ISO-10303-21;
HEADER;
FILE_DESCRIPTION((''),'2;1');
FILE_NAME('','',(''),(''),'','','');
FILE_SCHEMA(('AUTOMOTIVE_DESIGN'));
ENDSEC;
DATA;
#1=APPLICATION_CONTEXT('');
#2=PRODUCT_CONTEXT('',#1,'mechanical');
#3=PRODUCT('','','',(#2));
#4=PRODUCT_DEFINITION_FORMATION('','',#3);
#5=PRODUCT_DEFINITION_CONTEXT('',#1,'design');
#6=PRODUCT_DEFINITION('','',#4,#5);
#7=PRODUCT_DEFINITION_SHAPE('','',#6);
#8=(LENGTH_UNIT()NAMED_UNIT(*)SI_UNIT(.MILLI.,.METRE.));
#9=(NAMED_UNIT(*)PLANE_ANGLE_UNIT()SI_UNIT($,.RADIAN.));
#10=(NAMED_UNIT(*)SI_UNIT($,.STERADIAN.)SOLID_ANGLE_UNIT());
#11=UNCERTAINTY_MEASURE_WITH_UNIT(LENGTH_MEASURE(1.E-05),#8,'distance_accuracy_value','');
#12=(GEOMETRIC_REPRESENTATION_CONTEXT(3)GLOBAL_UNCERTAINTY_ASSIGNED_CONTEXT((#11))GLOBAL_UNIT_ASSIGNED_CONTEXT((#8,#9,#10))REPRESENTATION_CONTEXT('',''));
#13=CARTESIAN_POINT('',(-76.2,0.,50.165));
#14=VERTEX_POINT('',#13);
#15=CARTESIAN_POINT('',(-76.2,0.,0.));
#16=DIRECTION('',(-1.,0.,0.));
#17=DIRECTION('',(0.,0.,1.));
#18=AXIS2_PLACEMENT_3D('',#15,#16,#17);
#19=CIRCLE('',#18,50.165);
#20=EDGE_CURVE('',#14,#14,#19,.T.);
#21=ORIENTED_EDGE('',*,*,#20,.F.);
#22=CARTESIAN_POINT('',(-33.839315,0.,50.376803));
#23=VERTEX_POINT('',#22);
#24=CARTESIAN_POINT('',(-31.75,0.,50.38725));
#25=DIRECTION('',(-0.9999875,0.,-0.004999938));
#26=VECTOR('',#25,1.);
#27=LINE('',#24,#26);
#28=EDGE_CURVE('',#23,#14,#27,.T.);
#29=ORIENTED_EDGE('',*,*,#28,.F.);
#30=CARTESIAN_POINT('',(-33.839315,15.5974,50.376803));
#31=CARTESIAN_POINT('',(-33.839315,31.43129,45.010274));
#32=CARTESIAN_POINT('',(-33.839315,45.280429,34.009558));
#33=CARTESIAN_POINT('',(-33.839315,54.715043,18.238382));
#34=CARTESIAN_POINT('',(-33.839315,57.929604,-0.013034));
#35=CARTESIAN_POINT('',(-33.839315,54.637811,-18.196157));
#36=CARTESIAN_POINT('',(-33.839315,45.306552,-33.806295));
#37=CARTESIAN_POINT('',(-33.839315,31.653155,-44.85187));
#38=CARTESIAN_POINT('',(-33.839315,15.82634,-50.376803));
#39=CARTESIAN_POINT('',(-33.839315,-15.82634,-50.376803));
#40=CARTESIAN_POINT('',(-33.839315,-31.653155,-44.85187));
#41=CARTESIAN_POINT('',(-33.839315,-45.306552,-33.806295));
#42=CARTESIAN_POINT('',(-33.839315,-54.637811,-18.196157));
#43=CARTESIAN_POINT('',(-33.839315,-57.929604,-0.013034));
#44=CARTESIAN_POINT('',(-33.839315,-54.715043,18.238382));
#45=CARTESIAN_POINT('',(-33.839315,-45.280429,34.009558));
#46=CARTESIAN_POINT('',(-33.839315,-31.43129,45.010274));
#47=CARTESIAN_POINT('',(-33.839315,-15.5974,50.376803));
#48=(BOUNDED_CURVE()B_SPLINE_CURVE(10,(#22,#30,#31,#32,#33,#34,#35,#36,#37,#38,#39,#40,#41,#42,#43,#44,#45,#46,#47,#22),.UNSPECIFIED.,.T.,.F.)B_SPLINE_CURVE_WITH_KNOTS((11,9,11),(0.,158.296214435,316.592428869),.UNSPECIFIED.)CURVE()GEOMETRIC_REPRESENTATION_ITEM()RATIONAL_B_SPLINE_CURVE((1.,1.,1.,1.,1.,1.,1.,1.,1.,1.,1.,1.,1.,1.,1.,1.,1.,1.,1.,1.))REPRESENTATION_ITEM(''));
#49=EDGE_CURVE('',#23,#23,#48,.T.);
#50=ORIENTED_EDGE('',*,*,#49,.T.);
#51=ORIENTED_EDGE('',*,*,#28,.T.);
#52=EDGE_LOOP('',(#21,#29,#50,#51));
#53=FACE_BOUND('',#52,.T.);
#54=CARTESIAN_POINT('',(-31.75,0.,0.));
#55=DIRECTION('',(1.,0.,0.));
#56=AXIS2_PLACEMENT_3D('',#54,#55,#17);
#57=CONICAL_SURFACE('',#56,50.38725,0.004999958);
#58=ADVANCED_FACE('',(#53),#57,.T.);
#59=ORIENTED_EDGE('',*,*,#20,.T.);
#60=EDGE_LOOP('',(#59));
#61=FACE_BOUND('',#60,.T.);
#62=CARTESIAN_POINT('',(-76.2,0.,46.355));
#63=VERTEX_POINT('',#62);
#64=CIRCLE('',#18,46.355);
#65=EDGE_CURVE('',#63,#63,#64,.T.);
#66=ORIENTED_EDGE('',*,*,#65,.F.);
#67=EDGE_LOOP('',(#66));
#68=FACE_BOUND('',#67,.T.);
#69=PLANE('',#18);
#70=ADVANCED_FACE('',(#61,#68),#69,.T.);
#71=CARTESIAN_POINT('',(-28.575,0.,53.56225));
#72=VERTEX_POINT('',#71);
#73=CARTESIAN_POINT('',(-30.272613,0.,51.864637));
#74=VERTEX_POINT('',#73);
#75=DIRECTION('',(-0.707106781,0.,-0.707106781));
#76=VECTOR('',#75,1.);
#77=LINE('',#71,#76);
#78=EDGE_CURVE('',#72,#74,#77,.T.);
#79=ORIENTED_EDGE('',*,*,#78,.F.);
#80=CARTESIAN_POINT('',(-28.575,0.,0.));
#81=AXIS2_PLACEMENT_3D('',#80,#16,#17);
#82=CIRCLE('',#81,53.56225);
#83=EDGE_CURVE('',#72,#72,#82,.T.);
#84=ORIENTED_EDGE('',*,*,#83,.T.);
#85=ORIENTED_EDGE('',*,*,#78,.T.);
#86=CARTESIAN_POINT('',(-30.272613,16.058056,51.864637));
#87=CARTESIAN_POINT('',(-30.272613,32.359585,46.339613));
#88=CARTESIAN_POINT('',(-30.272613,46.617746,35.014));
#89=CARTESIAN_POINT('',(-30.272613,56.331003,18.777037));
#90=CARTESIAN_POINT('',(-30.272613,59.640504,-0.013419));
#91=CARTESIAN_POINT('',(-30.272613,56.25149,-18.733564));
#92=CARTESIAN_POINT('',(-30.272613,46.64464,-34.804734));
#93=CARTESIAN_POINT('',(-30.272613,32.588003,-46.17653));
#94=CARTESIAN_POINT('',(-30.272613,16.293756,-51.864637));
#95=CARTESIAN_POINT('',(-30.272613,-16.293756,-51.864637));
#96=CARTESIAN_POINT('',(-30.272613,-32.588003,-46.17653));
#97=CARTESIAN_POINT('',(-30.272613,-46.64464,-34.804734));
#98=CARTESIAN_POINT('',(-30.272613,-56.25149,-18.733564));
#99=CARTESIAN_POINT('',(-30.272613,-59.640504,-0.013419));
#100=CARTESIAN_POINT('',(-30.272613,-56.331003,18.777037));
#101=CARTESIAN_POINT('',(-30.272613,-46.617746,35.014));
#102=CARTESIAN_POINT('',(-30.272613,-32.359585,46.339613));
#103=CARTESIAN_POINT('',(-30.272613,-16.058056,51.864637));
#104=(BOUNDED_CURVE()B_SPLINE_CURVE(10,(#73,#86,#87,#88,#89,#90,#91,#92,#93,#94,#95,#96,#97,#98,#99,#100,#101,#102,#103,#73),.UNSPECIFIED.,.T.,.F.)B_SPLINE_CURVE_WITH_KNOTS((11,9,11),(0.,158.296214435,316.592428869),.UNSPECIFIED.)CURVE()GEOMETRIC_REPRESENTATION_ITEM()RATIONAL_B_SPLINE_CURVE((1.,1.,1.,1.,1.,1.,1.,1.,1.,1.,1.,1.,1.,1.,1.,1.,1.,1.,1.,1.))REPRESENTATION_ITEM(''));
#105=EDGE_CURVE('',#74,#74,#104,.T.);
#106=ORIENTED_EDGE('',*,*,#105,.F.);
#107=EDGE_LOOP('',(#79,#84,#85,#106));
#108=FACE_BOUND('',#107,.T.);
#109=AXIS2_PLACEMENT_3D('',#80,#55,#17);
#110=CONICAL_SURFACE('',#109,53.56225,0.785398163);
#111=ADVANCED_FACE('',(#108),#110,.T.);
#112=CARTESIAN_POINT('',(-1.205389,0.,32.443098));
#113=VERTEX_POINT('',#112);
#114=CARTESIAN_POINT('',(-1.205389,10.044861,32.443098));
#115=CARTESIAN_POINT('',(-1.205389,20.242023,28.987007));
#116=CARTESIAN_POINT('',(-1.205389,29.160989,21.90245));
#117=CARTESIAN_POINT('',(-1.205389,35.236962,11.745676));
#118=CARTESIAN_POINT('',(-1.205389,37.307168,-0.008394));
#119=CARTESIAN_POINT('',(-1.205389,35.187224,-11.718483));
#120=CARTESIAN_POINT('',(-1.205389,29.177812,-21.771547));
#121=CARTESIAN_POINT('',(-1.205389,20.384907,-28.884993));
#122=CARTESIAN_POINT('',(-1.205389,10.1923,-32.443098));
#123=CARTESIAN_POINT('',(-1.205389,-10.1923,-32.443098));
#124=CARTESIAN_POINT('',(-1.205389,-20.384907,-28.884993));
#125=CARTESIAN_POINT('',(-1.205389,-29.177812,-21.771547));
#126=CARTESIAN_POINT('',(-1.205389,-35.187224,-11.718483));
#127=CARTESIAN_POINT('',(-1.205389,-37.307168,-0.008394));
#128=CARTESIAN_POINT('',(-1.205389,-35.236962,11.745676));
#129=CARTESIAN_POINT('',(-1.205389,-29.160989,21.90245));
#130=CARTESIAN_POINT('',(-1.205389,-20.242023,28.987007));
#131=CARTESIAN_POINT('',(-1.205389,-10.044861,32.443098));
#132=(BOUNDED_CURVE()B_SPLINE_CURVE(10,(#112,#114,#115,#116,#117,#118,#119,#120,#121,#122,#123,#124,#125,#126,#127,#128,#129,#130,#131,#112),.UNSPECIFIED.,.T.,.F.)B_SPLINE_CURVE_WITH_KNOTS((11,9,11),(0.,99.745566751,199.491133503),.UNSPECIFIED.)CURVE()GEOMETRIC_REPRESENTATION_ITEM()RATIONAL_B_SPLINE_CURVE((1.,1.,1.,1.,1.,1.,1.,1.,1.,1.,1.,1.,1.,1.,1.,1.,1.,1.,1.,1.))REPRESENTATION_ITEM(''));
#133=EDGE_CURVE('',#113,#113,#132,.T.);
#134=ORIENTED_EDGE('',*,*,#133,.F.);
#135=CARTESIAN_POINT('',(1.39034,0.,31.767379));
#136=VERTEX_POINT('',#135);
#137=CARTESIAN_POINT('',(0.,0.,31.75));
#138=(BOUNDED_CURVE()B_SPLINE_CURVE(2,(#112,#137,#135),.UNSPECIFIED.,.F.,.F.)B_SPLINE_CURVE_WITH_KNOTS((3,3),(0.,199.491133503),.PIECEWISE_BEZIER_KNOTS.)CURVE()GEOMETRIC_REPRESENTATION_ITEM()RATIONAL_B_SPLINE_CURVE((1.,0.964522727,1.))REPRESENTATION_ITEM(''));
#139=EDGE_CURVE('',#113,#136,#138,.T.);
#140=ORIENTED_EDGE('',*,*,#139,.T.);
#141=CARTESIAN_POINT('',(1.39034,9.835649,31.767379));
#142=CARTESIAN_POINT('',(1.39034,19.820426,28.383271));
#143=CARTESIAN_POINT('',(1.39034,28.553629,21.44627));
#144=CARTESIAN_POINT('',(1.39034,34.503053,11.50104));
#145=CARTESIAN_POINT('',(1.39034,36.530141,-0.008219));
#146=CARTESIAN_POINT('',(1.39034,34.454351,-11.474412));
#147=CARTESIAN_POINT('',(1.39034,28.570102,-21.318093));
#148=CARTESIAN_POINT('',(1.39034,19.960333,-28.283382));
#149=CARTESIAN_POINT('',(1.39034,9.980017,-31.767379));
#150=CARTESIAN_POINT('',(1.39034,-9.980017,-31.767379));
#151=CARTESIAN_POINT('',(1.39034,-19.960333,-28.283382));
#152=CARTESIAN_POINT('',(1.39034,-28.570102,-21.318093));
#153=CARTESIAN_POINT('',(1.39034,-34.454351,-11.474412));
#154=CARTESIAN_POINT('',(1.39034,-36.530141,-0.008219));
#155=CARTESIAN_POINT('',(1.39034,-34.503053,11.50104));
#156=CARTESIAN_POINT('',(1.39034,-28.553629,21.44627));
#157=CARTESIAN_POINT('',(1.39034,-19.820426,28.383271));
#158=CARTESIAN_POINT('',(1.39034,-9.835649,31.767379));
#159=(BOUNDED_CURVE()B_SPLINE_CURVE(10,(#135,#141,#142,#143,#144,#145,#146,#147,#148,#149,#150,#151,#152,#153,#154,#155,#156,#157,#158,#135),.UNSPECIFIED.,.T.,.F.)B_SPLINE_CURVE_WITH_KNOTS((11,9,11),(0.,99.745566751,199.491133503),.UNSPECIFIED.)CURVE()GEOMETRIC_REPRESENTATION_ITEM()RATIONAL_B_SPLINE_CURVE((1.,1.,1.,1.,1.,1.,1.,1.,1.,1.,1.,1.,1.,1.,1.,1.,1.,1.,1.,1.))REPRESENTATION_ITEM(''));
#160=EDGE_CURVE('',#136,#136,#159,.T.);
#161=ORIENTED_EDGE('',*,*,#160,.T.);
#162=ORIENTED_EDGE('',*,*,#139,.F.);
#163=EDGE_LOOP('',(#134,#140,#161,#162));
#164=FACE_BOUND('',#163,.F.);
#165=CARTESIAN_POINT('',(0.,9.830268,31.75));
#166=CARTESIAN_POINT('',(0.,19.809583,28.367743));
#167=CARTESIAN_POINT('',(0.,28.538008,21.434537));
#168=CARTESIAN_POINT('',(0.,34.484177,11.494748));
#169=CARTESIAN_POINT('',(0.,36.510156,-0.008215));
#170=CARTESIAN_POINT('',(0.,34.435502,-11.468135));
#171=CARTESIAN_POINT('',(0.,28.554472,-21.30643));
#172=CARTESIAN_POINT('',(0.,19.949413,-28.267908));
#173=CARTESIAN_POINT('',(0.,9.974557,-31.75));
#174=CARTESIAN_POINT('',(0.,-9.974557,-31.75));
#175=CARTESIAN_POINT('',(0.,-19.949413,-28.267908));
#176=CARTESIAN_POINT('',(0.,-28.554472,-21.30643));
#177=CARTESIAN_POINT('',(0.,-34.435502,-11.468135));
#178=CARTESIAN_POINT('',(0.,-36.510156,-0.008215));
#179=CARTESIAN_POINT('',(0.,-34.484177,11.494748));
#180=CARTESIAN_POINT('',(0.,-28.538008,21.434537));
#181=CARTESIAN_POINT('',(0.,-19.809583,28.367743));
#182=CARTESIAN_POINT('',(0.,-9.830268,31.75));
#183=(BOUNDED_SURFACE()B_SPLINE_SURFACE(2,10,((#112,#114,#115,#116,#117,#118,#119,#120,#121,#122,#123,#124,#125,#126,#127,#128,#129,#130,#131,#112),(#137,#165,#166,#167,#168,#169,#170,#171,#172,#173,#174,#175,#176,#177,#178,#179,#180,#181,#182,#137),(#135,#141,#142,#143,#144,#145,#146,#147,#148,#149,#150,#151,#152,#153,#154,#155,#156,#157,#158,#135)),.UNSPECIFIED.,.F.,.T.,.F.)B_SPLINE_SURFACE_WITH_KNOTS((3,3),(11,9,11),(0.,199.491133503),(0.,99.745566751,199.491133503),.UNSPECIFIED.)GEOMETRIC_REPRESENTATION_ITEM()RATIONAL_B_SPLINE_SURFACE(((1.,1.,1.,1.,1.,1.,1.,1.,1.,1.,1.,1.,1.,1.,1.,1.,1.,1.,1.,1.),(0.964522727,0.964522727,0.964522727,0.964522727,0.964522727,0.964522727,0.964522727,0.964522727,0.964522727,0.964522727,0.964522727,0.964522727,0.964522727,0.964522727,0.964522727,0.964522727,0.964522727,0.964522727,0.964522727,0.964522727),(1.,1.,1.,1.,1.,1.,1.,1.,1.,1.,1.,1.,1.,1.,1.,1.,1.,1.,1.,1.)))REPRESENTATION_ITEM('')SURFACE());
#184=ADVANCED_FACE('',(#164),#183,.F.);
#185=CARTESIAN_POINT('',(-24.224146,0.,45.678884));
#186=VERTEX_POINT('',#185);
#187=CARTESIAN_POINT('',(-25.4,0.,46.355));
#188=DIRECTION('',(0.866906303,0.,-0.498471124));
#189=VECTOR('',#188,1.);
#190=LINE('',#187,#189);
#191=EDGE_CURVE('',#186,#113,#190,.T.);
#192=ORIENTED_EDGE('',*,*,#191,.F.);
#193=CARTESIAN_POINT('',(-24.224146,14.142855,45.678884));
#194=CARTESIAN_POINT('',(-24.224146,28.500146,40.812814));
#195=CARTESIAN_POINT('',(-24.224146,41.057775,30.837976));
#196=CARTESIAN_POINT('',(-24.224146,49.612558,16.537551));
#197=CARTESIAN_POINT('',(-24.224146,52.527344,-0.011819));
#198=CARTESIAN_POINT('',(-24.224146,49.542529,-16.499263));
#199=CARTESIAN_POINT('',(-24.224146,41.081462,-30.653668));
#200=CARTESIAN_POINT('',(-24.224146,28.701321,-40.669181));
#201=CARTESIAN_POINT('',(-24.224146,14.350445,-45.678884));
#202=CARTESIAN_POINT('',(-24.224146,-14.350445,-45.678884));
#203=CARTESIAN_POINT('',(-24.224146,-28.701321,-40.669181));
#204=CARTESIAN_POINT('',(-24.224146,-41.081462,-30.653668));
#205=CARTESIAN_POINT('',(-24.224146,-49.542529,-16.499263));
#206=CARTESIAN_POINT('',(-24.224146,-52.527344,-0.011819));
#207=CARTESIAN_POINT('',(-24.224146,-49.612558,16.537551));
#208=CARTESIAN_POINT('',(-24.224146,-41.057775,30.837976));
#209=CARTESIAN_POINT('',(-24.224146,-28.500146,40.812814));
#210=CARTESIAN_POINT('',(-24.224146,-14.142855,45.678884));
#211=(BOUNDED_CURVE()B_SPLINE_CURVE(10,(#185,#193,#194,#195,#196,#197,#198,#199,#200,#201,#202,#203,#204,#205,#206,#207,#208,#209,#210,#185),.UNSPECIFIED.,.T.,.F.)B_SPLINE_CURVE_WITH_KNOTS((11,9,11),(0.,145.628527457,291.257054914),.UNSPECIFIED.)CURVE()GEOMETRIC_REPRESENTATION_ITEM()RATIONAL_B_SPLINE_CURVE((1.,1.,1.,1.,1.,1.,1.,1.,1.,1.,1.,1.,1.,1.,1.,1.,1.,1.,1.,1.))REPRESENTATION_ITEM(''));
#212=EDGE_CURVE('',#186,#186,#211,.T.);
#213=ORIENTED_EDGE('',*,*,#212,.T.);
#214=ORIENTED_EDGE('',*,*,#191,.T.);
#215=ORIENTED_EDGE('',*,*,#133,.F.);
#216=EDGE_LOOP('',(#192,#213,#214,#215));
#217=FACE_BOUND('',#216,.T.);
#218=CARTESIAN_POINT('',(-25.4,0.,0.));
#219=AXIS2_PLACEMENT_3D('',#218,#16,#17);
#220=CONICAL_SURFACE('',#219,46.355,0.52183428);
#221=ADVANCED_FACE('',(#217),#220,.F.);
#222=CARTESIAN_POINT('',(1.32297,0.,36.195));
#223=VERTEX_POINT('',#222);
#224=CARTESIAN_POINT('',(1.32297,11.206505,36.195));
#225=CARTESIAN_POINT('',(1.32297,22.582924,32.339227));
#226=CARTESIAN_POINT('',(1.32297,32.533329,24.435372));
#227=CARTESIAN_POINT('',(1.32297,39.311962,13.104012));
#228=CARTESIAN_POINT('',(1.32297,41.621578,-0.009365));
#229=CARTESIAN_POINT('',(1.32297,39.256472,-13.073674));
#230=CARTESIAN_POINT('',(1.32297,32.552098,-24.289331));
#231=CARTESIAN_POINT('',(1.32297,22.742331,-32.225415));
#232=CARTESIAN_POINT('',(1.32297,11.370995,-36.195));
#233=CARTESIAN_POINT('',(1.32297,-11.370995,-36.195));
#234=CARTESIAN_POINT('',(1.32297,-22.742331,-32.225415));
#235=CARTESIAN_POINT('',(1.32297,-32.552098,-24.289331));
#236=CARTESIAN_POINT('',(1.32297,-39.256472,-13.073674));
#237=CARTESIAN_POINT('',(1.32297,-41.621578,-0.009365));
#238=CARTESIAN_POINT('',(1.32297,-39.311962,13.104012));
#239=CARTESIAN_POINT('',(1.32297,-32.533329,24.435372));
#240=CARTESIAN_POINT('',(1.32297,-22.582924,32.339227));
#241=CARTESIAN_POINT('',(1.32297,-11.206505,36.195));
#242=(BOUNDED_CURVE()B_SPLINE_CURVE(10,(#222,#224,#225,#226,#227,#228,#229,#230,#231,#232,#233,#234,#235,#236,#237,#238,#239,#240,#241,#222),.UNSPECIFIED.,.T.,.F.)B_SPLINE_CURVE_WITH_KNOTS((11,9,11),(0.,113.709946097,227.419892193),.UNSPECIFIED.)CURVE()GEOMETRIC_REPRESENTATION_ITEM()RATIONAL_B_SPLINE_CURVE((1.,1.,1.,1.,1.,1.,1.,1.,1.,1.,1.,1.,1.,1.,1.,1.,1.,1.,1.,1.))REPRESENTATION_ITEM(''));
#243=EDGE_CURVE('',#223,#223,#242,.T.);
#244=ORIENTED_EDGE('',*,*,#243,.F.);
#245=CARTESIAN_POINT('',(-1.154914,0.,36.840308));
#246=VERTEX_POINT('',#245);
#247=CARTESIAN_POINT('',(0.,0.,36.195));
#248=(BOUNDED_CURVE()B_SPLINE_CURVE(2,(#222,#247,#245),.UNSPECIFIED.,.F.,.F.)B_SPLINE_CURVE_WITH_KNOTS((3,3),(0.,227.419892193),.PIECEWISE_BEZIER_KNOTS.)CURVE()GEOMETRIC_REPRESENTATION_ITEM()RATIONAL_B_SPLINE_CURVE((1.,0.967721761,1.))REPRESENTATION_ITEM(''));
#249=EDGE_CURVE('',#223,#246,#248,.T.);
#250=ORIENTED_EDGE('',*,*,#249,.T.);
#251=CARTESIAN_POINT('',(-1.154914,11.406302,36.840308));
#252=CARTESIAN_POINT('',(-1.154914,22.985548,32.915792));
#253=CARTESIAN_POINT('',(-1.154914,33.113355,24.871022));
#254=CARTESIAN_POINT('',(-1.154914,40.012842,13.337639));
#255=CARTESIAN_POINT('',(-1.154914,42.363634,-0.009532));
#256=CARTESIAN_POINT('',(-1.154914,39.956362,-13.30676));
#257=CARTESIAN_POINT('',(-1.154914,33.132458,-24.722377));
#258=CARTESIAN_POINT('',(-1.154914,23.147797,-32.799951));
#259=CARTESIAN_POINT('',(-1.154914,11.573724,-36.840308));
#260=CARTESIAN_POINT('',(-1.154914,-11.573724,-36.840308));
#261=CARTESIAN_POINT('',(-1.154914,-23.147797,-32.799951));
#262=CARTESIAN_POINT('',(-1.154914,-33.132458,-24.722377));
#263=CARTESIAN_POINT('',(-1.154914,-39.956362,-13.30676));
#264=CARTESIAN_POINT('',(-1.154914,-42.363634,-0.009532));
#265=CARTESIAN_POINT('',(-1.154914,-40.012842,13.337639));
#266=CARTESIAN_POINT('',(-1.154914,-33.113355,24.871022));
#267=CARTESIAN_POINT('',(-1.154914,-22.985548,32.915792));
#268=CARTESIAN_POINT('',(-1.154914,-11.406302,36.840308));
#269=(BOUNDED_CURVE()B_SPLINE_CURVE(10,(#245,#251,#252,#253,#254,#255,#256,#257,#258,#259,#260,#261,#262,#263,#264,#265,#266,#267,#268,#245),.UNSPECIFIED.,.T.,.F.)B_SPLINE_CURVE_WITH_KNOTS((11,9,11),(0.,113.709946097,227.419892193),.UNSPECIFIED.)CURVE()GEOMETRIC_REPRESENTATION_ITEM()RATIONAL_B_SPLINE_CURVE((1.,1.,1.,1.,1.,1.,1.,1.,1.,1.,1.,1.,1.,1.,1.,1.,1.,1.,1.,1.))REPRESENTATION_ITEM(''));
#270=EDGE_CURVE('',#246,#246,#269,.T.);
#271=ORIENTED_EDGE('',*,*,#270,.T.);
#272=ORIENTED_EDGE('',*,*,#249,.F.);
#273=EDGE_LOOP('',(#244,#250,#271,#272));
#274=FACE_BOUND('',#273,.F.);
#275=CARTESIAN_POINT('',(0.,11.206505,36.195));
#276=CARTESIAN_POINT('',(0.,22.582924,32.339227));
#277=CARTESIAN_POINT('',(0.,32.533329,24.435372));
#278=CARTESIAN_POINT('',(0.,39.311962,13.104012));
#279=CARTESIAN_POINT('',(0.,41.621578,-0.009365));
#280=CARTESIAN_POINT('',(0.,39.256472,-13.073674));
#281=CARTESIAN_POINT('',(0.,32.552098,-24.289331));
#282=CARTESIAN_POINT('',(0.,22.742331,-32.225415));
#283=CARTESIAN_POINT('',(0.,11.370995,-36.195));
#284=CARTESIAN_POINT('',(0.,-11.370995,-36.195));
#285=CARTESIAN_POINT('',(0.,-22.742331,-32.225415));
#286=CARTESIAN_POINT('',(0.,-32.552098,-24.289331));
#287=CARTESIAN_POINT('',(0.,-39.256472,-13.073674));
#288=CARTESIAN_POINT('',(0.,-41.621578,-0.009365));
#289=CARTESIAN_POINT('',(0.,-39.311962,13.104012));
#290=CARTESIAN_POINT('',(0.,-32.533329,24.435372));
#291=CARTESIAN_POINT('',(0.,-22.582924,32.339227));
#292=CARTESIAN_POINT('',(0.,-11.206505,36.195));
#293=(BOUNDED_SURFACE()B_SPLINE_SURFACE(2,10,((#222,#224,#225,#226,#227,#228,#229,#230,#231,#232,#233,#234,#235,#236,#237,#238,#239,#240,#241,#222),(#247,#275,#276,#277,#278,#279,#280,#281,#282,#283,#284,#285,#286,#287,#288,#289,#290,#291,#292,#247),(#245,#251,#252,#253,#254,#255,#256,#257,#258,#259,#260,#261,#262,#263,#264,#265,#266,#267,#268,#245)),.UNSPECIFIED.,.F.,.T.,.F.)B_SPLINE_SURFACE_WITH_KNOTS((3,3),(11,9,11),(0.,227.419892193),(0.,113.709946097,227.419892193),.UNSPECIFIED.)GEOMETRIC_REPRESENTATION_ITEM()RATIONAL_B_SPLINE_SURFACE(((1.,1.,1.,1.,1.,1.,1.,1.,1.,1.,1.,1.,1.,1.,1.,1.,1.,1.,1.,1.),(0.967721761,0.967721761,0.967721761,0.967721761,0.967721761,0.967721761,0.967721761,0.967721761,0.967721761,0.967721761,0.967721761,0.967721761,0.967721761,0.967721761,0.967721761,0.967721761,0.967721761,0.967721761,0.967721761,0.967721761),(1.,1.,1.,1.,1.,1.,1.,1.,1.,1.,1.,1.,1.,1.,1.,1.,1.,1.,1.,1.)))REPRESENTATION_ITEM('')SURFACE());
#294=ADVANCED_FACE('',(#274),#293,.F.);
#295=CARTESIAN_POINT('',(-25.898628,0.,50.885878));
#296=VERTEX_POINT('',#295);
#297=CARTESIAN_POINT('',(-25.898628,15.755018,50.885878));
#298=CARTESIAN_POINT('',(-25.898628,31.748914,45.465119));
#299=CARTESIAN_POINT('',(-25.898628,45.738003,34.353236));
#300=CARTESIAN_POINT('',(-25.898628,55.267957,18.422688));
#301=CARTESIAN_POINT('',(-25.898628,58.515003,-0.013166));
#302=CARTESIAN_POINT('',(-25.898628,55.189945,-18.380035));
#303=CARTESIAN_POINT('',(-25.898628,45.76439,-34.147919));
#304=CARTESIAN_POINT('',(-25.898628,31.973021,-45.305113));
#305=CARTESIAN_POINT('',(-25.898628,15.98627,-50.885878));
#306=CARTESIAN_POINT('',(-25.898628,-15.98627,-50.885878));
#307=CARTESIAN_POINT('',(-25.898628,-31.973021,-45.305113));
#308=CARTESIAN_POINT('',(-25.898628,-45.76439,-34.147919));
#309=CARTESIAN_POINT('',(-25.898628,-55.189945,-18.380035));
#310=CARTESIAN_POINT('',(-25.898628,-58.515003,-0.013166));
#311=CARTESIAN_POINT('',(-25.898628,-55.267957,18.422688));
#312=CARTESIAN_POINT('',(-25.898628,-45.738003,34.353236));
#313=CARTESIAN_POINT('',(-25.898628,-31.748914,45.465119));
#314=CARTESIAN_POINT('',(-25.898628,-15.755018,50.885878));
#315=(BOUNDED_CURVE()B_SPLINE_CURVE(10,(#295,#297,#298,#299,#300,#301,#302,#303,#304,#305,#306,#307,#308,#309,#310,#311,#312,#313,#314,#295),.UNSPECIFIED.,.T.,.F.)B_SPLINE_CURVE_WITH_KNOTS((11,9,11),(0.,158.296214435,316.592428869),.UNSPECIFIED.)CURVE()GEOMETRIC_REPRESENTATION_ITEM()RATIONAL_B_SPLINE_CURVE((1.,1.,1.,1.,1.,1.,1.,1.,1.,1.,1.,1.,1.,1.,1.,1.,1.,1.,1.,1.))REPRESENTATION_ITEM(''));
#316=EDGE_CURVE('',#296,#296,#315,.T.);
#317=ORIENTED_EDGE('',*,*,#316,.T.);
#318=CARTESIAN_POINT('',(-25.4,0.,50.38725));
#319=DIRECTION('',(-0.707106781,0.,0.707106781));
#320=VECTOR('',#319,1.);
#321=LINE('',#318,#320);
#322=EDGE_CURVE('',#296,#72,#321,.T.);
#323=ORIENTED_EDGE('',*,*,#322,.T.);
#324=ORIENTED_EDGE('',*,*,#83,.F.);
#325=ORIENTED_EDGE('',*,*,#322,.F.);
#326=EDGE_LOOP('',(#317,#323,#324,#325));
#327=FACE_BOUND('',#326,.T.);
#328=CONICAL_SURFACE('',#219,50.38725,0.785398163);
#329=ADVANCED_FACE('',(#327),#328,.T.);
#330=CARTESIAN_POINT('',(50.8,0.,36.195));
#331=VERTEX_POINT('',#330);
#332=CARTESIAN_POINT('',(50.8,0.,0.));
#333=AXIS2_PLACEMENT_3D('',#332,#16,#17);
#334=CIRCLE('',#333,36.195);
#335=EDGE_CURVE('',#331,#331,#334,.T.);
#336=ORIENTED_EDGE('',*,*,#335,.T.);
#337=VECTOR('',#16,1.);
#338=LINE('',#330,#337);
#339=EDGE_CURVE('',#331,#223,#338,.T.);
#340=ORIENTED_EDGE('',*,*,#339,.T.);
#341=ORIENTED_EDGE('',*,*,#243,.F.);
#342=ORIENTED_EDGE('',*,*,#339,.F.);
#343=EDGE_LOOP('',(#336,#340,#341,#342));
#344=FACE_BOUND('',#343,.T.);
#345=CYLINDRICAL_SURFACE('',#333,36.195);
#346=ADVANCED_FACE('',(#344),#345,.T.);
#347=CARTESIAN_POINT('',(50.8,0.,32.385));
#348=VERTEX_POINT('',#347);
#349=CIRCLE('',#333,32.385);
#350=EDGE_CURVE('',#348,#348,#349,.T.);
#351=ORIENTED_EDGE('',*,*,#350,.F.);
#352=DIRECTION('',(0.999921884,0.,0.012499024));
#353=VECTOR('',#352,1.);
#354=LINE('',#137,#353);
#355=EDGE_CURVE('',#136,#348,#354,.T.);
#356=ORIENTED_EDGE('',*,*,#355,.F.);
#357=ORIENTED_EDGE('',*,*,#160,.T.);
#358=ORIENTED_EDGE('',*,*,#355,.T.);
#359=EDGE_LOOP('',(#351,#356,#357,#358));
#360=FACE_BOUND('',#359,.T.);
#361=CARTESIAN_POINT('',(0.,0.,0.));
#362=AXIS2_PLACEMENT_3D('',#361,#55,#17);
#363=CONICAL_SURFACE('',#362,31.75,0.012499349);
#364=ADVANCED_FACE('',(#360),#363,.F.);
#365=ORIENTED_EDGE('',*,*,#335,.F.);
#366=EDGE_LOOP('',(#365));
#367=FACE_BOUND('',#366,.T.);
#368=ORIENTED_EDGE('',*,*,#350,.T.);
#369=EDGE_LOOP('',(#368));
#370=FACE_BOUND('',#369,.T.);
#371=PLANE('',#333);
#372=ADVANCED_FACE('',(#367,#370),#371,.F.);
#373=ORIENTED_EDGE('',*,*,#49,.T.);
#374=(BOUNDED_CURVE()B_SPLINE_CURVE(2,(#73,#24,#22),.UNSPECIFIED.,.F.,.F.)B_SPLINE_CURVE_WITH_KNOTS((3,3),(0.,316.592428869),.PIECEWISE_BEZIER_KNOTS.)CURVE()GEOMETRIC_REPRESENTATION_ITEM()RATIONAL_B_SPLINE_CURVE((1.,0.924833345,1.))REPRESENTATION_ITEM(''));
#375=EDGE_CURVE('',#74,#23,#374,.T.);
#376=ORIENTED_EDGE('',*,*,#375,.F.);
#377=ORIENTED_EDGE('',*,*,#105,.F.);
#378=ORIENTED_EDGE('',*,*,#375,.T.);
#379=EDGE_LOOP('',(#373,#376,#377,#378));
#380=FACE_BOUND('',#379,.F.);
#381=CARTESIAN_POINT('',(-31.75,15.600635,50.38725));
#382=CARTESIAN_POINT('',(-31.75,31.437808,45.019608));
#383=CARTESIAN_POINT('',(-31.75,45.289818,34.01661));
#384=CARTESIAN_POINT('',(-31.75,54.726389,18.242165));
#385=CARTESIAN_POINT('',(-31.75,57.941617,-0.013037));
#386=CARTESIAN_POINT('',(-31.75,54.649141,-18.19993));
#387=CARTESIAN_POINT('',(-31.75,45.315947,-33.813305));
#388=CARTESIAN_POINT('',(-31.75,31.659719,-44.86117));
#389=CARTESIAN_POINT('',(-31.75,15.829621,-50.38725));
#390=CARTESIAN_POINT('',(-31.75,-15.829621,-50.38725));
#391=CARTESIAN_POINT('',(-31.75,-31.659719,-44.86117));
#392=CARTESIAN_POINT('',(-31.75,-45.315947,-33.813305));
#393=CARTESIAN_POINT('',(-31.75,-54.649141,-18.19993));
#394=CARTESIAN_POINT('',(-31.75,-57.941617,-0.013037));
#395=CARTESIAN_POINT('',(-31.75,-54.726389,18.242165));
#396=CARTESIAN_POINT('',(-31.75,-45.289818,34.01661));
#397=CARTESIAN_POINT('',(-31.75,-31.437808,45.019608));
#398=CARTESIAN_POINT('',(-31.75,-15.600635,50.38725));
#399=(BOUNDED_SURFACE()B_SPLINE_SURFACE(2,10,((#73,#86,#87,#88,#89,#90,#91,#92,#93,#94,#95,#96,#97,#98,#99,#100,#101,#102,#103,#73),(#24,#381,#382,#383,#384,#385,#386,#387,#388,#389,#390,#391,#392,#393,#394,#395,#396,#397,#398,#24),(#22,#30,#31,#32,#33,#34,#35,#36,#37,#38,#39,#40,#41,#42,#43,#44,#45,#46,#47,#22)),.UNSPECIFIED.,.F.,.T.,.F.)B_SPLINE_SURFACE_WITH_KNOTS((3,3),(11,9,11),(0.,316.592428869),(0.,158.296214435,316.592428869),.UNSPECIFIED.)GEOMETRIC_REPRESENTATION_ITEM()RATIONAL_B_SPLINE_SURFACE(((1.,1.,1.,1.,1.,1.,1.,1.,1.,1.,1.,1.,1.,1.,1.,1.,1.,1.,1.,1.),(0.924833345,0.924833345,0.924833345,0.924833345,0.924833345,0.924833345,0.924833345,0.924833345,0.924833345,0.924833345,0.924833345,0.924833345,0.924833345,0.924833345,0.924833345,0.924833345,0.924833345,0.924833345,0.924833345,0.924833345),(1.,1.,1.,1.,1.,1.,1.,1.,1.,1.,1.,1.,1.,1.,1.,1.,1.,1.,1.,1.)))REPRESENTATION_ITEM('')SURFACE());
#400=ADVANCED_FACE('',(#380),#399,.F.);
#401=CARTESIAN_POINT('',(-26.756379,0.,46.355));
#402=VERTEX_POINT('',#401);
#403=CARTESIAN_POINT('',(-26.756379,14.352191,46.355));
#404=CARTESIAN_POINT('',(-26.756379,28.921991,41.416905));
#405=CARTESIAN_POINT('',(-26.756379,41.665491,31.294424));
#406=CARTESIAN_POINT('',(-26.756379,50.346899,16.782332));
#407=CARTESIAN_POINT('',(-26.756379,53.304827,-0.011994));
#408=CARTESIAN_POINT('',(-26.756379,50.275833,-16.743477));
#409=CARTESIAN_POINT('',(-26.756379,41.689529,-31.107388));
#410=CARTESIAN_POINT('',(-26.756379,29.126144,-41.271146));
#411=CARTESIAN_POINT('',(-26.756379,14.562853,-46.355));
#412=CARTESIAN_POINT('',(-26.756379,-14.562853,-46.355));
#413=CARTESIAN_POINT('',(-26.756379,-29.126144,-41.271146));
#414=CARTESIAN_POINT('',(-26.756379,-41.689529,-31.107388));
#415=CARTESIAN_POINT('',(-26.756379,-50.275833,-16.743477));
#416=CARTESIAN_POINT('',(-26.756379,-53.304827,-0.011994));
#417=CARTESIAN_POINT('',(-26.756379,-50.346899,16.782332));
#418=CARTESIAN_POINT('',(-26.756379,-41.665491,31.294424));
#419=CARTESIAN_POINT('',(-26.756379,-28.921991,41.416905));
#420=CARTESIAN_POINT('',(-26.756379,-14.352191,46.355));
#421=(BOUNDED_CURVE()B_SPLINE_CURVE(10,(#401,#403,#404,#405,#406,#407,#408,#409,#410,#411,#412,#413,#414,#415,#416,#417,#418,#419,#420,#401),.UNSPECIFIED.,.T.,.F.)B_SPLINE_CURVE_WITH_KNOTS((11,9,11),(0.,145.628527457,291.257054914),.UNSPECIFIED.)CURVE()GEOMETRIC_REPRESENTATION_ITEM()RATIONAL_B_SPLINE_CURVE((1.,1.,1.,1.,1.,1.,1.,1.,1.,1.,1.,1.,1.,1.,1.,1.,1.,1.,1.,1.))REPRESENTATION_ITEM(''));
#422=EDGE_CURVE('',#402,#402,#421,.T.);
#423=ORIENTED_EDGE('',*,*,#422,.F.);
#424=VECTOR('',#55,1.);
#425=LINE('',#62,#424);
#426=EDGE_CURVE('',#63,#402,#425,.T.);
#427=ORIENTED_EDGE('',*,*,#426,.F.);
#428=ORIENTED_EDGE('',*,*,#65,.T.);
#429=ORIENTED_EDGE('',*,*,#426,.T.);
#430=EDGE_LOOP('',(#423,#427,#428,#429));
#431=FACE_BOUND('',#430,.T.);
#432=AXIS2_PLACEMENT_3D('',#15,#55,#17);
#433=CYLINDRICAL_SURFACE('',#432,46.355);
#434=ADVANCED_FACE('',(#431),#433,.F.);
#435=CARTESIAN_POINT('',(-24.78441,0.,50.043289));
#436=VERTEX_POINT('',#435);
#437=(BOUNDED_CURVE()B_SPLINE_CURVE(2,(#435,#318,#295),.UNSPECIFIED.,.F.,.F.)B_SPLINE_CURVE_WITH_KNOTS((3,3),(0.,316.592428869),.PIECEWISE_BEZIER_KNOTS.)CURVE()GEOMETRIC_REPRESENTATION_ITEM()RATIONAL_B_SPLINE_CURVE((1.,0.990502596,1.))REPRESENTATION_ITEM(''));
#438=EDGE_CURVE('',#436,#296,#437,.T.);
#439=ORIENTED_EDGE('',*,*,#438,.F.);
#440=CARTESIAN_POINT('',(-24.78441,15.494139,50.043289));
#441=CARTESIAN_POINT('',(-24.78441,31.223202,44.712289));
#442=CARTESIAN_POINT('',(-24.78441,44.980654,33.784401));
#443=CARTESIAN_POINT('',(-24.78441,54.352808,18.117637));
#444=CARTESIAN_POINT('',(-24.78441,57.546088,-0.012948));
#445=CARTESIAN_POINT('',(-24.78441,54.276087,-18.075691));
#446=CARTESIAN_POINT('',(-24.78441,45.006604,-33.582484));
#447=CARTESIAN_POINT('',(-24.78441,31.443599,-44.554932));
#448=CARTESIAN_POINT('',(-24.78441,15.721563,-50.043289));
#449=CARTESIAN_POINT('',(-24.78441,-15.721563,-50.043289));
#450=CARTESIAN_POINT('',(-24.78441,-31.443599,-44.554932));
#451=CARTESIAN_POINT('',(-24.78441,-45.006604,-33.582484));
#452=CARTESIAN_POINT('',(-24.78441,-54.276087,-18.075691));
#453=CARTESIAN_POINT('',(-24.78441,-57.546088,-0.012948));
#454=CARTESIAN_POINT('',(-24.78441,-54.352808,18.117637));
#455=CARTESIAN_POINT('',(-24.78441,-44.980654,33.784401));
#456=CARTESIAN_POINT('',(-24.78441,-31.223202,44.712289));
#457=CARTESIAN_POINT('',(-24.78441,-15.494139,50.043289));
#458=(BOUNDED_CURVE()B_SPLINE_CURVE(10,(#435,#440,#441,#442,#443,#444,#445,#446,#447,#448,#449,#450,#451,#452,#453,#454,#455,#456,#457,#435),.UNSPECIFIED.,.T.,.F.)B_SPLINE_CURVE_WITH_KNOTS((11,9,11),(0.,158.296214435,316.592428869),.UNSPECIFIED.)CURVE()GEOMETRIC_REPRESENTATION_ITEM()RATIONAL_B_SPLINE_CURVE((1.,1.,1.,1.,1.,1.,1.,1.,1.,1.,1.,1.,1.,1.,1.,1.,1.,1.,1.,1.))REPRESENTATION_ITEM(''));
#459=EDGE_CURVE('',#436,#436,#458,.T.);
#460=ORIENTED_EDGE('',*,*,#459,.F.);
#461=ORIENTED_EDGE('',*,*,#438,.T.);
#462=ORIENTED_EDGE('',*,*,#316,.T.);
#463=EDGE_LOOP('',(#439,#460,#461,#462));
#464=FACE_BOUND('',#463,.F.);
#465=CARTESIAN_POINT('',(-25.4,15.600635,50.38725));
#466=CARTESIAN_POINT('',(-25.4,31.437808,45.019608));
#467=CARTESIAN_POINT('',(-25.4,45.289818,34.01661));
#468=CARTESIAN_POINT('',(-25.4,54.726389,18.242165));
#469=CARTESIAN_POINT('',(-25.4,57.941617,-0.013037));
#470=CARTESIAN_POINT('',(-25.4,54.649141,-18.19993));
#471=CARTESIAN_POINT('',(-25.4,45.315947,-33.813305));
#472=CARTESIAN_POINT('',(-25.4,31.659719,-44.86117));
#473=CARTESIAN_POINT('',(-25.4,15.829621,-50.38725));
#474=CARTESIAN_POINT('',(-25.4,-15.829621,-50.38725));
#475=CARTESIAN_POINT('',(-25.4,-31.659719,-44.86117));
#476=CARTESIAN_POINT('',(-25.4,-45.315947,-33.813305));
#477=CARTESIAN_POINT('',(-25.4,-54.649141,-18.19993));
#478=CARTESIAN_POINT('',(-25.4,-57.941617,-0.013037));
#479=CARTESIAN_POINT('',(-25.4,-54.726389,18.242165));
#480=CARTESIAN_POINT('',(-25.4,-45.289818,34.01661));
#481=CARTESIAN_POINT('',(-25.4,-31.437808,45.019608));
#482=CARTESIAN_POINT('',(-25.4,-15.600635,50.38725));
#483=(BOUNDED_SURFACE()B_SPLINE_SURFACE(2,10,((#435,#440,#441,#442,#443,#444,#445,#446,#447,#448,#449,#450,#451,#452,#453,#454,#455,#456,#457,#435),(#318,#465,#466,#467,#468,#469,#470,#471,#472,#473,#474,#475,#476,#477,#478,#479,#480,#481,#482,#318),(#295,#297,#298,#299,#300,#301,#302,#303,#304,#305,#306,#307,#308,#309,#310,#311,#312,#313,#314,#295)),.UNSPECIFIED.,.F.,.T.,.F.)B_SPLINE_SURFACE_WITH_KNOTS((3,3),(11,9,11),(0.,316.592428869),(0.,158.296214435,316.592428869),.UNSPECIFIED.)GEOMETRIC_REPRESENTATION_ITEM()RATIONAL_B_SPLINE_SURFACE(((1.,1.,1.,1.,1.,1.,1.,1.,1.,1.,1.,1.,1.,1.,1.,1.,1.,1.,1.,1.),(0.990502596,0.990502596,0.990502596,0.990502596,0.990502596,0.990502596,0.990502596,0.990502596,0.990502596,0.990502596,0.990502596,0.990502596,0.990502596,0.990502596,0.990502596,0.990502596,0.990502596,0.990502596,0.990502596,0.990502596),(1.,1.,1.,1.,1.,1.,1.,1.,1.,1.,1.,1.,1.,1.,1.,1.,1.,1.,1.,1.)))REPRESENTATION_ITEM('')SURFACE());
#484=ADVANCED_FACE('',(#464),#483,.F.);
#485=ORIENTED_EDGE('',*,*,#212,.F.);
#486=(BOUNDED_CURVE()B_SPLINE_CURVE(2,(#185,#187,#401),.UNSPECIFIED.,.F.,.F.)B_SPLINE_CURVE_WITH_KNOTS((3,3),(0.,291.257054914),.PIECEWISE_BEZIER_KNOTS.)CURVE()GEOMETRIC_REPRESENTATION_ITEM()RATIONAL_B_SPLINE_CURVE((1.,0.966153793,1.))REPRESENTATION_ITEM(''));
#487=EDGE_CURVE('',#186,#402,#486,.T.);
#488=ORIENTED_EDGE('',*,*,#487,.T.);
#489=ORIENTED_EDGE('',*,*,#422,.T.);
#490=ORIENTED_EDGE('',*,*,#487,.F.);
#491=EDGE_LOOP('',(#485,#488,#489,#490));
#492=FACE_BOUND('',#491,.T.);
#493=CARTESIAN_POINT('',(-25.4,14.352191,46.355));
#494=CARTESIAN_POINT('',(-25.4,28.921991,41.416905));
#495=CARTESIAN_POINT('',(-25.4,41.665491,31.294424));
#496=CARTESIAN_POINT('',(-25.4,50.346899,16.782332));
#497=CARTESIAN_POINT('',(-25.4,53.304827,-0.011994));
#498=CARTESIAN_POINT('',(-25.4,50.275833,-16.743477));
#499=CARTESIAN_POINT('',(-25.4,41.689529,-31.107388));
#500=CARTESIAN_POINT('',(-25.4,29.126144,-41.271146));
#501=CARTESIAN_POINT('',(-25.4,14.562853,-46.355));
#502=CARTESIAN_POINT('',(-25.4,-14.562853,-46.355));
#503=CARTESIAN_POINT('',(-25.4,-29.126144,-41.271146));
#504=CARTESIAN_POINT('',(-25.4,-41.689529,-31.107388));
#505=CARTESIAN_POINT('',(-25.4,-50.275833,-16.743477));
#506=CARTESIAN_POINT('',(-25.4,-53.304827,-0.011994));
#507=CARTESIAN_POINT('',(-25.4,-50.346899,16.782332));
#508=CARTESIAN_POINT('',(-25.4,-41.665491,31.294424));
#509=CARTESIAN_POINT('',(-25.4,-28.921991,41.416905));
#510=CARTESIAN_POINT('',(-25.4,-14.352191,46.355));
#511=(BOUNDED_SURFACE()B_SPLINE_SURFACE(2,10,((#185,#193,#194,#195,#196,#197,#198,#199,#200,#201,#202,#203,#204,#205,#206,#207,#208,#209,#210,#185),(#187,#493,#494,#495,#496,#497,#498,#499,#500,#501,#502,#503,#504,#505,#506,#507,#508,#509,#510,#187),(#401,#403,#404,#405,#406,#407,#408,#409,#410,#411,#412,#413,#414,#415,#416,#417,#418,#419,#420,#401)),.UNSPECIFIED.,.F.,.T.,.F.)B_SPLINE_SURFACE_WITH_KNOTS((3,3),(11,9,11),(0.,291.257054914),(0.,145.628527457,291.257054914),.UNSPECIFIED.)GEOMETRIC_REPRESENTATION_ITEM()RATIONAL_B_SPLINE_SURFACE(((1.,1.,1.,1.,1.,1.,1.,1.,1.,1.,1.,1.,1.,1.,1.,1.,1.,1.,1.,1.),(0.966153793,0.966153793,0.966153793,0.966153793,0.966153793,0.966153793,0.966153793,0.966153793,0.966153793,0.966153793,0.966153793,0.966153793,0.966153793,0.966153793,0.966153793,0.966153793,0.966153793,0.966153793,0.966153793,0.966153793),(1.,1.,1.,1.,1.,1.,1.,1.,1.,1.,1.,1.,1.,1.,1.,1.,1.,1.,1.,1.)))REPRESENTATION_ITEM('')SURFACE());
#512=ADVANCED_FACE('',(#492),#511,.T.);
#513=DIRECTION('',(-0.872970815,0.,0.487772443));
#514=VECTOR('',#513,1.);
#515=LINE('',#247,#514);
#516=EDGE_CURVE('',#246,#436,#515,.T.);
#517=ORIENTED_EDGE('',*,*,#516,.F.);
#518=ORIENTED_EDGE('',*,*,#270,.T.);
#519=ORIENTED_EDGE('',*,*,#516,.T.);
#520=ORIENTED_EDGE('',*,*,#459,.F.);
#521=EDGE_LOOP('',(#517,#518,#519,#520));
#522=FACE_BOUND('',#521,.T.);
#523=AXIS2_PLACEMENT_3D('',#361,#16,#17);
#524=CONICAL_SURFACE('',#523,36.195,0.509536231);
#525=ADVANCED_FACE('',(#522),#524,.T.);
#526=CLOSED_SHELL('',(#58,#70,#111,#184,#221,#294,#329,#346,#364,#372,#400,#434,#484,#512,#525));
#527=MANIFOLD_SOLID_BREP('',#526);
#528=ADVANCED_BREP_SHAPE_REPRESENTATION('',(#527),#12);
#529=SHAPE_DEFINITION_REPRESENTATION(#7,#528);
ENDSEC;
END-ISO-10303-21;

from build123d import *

# Parameters (mm, degrees)
F3_R = 5.08


# Not quite as in the source:
# - a variable given as a bare number and used for a length is read in inches; the dataset says mm whatever the document's units were


with BuildPart() as f2:
    # F1 (on Front) → F2 (revolve)
    with BuildSketch(Plane.XZ):
        Polygon((-25.4, 46.355), (0, 31.75), (50.8, 32.385), (50.8, 36.195), (0, 36.195), (-25.4, 50.38725), (-28.575, 53.56225), (-31.75, 50.38725), (-76.2, 50.165), (-76.2, 46.355), align=None)
    revolve(axis=Axis((-24.3991323134, 0, 0), (-1, 0, 0)))

    # F3
    f3_edges = [f2.edges().sort_by_distance(p)[0] for p in [
        (-25.4, 0, -46.355),
        (0, 0, -31.75),
        (0, 0, -36.195),
        (-31.75, 0, -50.38725),
        (-25.4, 0, -50.38725),
    ]]
    fillet(f3_edges, radius=F3_R)


solid = f2.part
